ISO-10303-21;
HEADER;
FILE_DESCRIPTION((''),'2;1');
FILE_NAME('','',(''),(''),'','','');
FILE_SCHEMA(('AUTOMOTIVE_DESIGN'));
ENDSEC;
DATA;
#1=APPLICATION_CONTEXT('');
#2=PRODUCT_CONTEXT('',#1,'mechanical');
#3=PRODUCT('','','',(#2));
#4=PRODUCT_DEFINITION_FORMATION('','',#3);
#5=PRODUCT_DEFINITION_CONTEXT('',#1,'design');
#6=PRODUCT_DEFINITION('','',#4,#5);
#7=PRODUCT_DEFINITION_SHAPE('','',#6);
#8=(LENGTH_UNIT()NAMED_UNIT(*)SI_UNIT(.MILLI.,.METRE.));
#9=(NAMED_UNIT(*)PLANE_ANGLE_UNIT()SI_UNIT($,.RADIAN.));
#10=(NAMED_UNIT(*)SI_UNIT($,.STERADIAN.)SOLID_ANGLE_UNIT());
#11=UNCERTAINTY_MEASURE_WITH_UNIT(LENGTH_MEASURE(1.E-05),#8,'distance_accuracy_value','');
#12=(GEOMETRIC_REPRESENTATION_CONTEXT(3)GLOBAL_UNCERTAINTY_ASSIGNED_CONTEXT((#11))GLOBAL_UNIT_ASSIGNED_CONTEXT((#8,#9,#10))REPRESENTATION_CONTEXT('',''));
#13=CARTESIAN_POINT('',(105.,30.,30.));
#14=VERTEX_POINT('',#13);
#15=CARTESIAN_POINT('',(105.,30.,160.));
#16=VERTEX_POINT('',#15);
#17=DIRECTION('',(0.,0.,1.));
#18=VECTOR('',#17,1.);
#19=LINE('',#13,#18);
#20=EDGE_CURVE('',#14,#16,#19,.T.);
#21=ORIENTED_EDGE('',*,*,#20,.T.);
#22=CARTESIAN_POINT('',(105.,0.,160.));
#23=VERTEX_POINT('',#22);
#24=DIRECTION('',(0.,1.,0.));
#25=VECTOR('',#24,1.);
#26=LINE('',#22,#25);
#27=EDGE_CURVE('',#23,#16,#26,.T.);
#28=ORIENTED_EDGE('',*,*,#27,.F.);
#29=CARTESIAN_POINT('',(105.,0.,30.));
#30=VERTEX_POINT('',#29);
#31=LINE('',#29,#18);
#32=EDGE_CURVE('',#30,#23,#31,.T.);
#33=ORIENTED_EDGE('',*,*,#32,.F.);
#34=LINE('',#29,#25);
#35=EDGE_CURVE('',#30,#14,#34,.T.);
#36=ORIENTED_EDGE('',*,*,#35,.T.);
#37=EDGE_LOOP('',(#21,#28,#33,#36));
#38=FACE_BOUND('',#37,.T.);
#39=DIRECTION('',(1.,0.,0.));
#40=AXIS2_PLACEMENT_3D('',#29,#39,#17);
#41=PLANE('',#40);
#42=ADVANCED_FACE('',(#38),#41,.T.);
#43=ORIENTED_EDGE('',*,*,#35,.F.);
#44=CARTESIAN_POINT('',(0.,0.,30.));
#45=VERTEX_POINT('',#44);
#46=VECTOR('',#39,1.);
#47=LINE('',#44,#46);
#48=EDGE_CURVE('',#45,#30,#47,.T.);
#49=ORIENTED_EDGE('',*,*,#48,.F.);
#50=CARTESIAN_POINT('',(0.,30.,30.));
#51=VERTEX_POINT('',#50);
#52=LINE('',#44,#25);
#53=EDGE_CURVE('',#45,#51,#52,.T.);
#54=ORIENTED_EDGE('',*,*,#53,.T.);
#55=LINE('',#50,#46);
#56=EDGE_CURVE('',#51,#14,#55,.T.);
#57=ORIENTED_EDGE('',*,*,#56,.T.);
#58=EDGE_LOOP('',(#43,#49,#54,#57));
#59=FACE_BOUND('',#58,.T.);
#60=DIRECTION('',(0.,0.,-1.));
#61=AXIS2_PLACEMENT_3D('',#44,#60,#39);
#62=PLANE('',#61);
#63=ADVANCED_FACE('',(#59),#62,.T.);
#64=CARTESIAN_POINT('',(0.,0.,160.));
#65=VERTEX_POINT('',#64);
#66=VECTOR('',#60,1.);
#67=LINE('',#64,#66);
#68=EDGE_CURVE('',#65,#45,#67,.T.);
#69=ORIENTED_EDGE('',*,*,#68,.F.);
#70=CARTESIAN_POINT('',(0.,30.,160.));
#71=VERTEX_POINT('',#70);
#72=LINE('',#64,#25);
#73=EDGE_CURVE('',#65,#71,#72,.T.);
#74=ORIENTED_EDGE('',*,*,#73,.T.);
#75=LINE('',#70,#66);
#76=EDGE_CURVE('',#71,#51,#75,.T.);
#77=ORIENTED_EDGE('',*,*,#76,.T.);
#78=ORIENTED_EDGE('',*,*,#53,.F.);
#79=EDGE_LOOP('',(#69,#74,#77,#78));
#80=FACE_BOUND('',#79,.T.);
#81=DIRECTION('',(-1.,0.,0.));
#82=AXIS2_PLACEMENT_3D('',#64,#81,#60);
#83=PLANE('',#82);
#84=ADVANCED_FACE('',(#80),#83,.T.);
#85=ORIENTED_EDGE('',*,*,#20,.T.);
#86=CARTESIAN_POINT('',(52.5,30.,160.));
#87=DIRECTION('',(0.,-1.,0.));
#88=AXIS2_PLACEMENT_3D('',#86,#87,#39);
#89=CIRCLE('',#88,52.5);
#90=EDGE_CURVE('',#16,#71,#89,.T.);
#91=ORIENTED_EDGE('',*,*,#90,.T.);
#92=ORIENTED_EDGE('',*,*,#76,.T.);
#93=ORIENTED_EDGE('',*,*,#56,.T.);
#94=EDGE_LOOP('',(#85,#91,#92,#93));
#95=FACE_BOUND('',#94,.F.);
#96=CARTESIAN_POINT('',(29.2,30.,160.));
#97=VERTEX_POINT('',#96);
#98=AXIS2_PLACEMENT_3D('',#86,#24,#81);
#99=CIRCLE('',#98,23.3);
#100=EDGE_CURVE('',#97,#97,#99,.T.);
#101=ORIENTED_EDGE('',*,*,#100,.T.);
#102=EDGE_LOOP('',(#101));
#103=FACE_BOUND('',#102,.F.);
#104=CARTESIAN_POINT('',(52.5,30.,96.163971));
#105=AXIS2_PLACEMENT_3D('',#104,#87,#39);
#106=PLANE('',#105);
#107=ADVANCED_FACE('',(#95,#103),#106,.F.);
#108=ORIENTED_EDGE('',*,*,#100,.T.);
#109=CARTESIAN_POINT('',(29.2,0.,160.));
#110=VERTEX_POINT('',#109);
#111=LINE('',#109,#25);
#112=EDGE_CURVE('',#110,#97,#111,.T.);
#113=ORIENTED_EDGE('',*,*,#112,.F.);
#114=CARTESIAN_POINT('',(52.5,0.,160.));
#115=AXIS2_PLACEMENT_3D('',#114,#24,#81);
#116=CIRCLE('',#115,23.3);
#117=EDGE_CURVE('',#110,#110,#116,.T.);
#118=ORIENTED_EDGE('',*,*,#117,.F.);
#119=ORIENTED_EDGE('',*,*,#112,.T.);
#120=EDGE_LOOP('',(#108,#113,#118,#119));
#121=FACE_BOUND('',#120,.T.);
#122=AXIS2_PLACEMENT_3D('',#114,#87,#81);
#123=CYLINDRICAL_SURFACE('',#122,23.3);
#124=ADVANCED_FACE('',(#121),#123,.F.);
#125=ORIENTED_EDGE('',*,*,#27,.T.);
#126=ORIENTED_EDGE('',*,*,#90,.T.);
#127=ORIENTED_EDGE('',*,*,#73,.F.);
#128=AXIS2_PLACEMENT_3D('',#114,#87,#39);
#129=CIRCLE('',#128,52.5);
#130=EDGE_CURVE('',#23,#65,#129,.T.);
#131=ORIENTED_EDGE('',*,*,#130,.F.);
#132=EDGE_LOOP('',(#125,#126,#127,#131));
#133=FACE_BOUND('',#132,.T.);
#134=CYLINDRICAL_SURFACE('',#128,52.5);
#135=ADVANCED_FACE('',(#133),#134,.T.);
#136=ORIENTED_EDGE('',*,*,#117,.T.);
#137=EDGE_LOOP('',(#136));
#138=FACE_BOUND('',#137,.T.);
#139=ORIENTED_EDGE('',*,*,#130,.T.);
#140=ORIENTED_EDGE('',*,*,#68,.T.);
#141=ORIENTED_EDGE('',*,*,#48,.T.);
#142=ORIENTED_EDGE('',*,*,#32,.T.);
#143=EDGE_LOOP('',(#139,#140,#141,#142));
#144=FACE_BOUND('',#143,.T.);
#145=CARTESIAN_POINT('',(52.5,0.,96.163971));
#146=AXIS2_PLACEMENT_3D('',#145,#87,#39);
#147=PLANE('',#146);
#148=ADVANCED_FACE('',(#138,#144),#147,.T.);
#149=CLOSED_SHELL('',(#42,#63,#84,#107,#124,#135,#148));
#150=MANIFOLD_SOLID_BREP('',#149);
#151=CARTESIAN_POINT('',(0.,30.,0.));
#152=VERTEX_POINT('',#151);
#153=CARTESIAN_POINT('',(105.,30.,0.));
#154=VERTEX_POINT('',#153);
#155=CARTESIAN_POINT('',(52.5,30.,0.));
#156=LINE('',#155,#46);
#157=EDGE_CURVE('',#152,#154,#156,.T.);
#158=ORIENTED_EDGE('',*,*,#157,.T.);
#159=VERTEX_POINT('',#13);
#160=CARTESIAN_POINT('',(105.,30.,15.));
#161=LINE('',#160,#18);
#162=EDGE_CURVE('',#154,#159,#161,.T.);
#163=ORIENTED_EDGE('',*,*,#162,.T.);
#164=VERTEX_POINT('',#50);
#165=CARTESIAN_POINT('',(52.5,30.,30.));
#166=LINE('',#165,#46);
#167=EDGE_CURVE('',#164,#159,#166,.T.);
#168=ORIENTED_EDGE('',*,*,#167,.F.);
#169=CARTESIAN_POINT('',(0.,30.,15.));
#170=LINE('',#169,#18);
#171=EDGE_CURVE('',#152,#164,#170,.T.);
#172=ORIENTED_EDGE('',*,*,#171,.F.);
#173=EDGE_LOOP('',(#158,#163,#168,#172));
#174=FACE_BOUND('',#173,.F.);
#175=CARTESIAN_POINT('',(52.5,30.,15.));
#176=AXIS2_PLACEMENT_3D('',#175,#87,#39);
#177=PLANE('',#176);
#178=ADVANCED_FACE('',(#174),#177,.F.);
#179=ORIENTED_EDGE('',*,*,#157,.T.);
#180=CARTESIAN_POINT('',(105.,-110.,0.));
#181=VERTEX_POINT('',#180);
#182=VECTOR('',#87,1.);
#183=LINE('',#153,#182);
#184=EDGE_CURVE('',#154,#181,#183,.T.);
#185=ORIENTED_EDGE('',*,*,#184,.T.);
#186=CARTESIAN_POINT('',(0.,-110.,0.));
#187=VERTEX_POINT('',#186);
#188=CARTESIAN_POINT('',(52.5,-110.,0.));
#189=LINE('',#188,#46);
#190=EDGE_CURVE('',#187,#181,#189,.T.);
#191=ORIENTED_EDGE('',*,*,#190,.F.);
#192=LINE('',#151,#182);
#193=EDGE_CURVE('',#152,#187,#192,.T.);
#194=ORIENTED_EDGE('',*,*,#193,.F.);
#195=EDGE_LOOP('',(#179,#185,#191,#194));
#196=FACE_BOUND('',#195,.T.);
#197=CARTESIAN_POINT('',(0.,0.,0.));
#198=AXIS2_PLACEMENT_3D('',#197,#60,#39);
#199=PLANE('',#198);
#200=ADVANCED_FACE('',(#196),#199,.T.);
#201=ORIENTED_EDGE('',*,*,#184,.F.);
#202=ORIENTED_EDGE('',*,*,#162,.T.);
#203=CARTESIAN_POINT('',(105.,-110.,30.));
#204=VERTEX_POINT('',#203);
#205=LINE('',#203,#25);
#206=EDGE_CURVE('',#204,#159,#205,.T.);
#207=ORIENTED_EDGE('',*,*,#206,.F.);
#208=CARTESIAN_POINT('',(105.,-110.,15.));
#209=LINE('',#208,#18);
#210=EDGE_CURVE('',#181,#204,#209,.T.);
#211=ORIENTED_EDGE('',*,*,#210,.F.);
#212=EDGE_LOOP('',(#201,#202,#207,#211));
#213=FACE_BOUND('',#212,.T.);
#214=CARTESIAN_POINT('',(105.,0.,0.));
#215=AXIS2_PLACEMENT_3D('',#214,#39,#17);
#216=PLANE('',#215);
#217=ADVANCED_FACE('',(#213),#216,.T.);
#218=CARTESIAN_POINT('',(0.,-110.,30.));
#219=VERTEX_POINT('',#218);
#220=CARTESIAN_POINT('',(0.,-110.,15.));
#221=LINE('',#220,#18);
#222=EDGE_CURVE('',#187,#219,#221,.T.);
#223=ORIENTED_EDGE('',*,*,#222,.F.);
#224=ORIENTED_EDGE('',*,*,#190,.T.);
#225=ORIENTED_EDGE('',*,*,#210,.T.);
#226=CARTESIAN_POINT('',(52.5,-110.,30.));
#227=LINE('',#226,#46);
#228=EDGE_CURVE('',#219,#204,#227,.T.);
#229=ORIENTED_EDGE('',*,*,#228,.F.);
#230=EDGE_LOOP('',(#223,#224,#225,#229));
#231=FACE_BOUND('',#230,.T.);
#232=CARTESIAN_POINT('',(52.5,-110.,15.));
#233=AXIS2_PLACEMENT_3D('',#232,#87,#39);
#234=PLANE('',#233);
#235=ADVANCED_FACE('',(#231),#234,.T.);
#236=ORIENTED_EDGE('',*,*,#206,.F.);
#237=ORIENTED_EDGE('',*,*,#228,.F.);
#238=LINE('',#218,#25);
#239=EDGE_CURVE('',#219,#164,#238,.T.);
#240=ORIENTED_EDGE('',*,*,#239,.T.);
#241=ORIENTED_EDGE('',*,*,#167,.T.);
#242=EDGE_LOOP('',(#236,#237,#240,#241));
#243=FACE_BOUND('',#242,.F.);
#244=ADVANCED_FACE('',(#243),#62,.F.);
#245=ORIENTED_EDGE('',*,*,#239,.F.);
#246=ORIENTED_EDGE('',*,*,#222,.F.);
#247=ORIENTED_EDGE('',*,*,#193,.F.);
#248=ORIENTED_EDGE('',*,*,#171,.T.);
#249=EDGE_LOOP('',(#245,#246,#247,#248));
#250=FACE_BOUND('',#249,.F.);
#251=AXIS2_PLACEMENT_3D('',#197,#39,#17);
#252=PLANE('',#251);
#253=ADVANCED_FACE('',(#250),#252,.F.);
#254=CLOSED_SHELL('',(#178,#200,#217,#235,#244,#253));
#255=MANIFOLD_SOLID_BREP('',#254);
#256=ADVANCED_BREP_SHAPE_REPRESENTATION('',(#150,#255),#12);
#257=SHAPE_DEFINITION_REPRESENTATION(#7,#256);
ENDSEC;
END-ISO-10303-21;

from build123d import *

# Parameters (mm, degrees)
F0_W          = 105
F0_H          = 30
F1_DEPTH      = 110
F1_DEPTH_BACK = 30
F2_DEPTH      = 30


# Not quite as in the source:
# - a feature of the source that left no trace in its solid (it failed there, or was rolled back) is left out


with BuildPart() as f1:
    # F0 (on Front) → F1 (new body, two sides)
    with BuildSketch(Plane.XZ) as f1_sk:
        with Locations((52.5, 15)):
            Rectangle(F0_W, F0_H)
    extrude(amount=F1_DEPTH)
    extrude(f1_sk.sketch, amount=-F1_DEPTH_BACK)


with BuildPart() as f2:
    # F0 (on Front) → F2 (new body)
    with BuildSketch(Plane.XZ):
        with BuildLine():
            Line((0, 160), (0, 30))
            Line((0, 30), (105, 30))
            Line((105, 30), (105, 160))
            Line((105, 160), (75.8, 160))
            ThreePointArc((75.8, 160), (52.5, 136.7), (29.2, 160))
            Line((29.2, 160), (0, 160))
        make_face()
        with BuildLine():
            ThreePointArc((105, 160), (52.5, 212.5), (0, 160))
            Line((0, 160), (29.2, 160))
            ThreePointArc((29.2, 160), (52.5, 183.3), (75.8, 160))
            Line((75.8, 160), (105, 160))
        make_face()
    extrude(amount=-F2_DEPTH)


solid = Compound([f1.part, f2.part])
